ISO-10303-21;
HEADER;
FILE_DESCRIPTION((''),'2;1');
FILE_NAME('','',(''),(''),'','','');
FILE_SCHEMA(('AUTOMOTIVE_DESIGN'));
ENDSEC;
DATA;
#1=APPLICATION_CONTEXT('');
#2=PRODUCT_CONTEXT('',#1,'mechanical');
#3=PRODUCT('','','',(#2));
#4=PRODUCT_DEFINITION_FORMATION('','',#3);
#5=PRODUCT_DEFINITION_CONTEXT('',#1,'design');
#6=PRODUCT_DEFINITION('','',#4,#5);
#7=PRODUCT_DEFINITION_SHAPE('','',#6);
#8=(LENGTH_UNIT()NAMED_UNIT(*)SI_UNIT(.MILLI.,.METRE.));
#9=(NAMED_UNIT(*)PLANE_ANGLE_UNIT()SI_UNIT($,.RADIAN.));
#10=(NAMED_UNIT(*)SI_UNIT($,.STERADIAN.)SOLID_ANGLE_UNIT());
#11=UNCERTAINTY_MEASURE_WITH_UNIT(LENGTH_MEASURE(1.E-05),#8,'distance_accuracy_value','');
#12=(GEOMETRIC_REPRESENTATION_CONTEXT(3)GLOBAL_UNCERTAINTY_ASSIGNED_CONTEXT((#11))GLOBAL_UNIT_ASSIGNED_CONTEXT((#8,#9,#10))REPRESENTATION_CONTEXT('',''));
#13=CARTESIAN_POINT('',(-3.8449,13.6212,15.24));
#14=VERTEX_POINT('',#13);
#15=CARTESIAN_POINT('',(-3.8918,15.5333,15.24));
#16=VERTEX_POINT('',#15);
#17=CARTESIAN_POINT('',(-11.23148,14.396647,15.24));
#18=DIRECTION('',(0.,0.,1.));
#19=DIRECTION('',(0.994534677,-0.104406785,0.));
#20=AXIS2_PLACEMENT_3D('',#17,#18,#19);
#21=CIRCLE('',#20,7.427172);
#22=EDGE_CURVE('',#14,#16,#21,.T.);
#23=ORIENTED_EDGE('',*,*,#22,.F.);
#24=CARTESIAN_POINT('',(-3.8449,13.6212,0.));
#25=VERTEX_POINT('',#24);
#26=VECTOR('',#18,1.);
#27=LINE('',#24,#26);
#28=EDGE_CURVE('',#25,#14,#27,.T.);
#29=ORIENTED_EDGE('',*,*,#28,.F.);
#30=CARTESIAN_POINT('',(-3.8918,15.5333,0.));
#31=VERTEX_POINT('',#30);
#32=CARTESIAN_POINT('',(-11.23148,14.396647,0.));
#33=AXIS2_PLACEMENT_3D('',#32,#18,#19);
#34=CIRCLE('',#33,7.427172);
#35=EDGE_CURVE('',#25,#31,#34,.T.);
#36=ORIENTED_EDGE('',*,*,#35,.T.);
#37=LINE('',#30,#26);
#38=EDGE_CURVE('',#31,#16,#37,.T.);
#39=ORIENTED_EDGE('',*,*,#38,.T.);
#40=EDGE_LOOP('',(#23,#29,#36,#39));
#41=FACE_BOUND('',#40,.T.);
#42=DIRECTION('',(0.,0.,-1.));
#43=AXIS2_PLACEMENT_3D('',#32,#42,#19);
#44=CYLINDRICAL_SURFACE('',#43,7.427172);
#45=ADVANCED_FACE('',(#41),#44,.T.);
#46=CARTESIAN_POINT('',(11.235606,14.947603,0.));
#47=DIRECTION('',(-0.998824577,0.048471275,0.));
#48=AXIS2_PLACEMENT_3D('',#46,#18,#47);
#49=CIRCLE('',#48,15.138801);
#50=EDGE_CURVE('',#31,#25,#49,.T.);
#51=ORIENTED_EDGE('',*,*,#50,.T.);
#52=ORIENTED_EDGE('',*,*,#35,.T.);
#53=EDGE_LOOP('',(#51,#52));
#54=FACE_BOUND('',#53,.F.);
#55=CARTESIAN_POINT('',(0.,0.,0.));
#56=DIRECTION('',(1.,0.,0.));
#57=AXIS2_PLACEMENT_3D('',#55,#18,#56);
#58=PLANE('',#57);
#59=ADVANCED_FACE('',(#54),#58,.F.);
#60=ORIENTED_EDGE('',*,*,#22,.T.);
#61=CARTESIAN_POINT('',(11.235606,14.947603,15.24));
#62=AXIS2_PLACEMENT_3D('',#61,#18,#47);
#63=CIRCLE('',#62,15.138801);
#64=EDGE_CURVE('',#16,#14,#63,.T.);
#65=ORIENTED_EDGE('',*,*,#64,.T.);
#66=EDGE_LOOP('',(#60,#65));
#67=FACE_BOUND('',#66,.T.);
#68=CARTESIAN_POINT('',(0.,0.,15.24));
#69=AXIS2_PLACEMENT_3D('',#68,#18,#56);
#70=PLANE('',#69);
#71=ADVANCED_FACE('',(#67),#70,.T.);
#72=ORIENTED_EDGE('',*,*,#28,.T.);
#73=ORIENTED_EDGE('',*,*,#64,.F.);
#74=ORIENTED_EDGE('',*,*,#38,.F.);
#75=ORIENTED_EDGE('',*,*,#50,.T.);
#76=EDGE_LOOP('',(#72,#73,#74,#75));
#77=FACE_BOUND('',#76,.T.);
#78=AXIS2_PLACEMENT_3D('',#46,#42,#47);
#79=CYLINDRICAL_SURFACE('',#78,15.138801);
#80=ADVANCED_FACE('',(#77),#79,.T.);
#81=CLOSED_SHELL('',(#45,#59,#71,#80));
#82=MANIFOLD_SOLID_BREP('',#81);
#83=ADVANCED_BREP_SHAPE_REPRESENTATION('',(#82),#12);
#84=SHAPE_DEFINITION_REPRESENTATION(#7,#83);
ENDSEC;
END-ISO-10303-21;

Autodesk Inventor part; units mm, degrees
ref_plane "YZ Plane" through (0, 0, 0) normal (1, 0, 0) x (0, 1, 0)
ref_plane "XZ Plane" through (0, 0, 0) normal (0, 1, 0) x (-1, 0, 0)
ref_plane "XY Plane" through (0, 0, 0) normal (0, 0, 1) x (1, 0, 0)
sketch "Sketch1" plane through (0, 0, 0) normal (0, 0, 1) x (1, 0, 0)
  arc A0 (-3.8854, 15.6814) -> (16.1434, 0.6264) centre (11.2356, 14.9476) ccw
  arc A1 (-3.8854, 15.6814) -> (-3.915, 15.674) centre (0, 0) ccw
  arc A2 (-14.2514, 7.6093) -> (16.1434, 0.6264) centre (0, 0) ccw
  arc A3 (-3.915, 15.674) -> (-18.3827, 16.4116) centre (-11.2328, 14.3967) ccw
  arc A4 (-3.8449, 13.6212) -> (-3.8918, 15.5333) centre (-11.2328, 14.3967) ccw
  line L0 (-18.3827, 16.4116) -> (-14.2514, 7.6093)
  circle A5 centre (-12.1999, 18.1336) radius 1.555
  ellipse E0 centre (-1.0981, -5.3272) end of major axis (8.9522, -10.3074) minor radius 1.7466
extrude "Extrusion1" add sketch "Sketch1" along normal blind 15.24 contours A4 A0
sketch "Sketch3" plane through (0, 0, 15.24) normal (0, 0, 1) x (1, 0, 0)
  arc A0 (-3.915, 15.674) -> (-14.2514, 7.6093) centre (-11.2328, 14.3967) ccw projected
  point P0 (0, 0)
properties part number "duck"
